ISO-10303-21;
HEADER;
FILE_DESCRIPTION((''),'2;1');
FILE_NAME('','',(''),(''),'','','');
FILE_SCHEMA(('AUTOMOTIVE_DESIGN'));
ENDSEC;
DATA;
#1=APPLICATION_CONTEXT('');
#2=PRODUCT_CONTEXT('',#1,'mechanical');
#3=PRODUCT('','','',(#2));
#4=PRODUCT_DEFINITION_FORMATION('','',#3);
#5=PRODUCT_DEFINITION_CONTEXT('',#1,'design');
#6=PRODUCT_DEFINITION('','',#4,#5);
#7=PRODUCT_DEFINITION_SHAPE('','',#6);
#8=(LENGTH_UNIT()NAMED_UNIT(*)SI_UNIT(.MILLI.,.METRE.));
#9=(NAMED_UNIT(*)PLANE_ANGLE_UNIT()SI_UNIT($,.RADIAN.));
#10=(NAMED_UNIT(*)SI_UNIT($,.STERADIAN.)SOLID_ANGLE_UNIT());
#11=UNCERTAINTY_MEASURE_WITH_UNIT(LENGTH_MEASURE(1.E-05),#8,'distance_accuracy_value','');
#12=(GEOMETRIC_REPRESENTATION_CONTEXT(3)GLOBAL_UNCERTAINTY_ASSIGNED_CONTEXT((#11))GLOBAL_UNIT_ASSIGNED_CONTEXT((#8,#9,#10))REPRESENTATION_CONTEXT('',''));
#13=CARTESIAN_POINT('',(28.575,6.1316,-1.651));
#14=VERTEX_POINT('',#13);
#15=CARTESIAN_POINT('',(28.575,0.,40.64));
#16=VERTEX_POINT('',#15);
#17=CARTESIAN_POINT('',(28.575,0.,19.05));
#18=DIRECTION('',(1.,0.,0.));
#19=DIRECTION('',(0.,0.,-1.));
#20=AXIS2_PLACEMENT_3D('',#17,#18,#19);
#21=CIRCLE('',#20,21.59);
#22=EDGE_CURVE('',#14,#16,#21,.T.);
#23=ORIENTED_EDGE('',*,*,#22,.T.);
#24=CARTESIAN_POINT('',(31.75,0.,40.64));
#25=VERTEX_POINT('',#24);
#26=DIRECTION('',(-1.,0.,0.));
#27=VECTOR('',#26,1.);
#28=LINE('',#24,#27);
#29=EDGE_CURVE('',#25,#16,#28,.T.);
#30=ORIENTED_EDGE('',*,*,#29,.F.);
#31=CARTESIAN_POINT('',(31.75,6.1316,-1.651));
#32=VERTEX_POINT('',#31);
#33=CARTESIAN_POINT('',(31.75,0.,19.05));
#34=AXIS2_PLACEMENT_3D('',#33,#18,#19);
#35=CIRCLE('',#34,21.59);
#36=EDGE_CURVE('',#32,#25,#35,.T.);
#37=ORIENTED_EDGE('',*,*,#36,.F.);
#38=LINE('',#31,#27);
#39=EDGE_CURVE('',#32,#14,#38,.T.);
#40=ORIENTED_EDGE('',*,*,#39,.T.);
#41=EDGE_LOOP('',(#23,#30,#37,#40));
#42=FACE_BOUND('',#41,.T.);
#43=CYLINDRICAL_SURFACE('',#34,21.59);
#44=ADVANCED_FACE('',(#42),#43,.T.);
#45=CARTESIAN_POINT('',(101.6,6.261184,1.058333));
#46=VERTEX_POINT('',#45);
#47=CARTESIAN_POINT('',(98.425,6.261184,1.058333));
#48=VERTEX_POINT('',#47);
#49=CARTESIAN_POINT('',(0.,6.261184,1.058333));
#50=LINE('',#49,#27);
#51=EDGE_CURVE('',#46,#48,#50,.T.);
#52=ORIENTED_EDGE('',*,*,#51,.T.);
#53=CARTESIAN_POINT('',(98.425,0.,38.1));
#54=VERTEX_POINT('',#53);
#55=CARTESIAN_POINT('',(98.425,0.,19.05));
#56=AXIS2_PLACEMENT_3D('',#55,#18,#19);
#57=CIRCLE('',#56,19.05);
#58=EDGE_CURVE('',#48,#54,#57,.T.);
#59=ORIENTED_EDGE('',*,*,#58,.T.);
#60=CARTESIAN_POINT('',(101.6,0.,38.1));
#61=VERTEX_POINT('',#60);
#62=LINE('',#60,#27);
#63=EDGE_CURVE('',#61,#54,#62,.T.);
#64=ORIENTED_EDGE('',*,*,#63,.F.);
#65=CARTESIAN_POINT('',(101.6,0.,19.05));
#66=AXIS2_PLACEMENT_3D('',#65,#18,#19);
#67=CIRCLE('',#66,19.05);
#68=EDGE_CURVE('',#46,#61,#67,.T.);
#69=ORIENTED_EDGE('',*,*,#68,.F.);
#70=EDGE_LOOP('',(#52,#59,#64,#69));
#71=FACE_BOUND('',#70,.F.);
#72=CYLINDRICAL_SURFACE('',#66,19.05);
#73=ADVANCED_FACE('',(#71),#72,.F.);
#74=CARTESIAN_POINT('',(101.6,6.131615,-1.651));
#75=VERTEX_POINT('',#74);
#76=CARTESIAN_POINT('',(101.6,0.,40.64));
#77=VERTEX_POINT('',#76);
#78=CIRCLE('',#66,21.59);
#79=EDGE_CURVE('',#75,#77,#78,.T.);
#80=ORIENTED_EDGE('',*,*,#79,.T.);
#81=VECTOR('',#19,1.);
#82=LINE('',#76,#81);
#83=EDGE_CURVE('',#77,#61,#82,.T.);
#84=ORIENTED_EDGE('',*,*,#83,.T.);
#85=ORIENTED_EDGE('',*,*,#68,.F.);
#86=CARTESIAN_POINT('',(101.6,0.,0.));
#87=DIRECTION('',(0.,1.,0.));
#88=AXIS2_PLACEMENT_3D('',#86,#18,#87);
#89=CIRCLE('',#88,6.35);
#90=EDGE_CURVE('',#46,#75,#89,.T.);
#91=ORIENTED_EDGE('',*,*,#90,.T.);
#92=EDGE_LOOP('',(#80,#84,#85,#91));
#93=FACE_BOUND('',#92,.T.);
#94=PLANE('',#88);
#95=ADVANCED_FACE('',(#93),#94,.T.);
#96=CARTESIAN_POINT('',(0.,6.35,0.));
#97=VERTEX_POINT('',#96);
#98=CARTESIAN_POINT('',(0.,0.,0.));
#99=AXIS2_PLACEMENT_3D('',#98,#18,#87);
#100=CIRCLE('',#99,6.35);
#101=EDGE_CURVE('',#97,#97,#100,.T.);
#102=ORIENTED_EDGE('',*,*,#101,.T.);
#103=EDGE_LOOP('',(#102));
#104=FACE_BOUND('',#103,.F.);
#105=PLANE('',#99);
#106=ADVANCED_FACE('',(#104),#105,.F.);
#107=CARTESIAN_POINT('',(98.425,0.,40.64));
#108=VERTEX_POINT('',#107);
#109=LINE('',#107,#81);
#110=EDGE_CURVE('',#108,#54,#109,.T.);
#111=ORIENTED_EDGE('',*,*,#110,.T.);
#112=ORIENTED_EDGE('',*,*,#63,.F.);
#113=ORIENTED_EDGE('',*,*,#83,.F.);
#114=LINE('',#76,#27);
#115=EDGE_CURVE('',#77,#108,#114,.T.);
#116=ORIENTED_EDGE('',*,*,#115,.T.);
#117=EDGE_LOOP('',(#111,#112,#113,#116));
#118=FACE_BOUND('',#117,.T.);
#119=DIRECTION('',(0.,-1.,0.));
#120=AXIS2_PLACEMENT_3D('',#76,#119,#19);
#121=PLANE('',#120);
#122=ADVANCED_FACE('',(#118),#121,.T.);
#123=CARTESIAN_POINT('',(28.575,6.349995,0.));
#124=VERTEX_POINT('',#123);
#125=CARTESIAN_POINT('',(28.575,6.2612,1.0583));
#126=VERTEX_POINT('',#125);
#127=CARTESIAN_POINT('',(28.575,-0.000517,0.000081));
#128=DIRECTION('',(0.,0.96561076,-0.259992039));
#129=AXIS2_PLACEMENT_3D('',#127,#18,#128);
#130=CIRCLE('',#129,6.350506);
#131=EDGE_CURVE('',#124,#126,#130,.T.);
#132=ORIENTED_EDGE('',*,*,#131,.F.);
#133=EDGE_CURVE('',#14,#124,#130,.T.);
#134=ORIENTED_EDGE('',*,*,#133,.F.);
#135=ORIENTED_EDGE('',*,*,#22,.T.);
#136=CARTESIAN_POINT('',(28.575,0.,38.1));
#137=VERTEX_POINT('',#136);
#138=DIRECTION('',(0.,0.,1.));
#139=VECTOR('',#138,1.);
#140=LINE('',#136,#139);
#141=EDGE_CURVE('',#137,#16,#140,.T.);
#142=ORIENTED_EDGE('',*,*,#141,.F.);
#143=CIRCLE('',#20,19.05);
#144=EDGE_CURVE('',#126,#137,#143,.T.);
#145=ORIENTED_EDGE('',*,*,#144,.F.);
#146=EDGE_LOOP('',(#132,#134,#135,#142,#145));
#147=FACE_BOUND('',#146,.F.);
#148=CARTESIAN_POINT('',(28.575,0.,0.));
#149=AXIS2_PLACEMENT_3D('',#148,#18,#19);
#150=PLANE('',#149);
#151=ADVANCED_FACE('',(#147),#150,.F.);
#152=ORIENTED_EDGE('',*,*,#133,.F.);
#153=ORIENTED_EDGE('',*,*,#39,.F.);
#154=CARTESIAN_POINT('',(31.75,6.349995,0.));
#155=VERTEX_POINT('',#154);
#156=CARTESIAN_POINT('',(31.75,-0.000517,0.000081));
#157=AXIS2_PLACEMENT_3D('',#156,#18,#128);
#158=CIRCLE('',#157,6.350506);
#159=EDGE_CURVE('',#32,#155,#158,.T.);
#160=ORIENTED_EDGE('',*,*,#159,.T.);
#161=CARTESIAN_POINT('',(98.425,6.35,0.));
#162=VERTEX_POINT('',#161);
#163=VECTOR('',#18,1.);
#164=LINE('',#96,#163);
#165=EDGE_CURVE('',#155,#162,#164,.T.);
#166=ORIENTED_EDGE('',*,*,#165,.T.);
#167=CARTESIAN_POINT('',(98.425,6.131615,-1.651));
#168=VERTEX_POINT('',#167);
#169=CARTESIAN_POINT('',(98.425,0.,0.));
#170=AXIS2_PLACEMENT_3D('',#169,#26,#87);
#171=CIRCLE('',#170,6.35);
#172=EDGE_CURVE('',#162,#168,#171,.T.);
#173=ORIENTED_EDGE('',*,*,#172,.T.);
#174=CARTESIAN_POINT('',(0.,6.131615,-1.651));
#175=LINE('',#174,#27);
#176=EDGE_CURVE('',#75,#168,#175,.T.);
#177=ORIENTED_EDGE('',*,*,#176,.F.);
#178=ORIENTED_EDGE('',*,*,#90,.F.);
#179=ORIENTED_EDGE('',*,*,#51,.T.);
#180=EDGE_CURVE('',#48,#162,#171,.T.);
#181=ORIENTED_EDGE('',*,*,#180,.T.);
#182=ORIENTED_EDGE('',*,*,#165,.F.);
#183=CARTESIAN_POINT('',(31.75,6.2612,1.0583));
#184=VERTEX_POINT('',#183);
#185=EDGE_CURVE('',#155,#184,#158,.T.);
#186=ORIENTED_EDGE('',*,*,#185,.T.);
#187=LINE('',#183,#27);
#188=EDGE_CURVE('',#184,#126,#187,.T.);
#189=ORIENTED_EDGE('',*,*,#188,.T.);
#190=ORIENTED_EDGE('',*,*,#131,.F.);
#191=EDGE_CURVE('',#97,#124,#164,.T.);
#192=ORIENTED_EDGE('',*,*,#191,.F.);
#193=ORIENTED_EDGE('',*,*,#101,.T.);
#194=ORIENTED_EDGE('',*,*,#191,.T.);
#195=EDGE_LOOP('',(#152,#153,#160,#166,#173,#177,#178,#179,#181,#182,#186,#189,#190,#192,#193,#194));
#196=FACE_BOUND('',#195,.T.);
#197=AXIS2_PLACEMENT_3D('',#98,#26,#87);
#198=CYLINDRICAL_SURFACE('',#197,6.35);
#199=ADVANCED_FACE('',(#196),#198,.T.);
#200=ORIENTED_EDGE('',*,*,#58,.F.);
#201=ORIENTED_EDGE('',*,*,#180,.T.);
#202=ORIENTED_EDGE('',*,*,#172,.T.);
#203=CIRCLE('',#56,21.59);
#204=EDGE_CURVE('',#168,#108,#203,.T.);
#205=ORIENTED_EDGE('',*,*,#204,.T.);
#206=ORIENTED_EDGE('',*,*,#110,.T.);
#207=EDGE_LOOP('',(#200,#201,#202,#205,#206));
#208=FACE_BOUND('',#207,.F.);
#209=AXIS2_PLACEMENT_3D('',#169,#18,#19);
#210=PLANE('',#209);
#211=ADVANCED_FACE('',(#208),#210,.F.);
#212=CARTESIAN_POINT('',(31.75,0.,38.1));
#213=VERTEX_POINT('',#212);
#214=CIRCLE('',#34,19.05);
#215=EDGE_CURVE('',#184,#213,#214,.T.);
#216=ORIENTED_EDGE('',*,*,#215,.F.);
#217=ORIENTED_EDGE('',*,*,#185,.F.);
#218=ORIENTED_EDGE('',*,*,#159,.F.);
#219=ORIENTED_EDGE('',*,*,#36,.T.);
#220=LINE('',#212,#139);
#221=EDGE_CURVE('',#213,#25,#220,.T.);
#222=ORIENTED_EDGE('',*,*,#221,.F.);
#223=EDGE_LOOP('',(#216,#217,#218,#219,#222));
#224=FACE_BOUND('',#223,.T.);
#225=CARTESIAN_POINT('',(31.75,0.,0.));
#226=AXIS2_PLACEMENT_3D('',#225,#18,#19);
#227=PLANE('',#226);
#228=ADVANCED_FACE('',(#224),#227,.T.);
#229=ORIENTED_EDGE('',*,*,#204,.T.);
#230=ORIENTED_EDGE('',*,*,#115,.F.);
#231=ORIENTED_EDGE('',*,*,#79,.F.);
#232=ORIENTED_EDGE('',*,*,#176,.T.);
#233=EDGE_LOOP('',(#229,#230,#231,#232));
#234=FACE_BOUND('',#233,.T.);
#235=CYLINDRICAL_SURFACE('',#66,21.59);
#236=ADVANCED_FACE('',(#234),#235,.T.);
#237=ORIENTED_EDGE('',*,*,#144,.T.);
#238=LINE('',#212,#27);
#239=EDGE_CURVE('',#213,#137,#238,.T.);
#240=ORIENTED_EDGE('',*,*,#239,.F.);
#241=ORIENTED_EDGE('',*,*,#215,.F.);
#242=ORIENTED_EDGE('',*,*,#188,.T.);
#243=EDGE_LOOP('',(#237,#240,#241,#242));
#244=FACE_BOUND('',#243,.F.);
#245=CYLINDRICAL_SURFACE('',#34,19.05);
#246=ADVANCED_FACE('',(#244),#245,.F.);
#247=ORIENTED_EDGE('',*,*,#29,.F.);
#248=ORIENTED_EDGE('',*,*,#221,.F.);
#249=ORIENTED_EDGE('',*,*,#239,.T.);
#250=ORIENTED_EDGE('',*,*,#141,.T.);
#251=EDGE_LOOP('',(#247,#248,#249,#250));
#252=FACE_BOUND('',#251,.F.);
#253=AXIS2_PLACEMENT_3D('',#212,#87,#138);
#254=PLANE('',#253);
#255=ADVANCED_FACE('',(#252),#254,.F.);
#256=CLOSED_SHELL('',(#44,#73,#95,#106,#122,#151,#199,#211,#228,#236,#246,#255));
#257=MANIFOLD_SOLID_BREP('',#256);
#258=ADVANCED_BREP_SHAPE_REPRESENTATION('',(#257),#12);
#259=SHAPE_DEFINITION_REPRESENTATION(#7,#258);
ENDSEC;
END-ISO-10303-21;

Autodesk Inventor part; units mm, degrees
ref_plane "YZ Plane" through (0, 0, 0) normal (1, 0, 0) x (0, 1, 0)
ref_plane "XZ Plane" through (0, 0, 0) normal (0, 1, 0) x (-1, 0, 0)
sketch "Sketch1" plane through (0, 0, 0) normal (1, 0, 0) x (0, 1, 0)
  circle A0 centre (0, 0) radius 6.35
  dimension "d0" = 12.7
extrude "Extrusion1" add sketch "Sketch1" along normal blind 101.6
sketch "Sketch2" plane through (101.6, 0, 0) normal (1, 0, 0) x (0, 0, -1)
  line L0 (0, 0) -> (2.54, 0)
  line L1 (-40.64, 0) -> (-38.1, 0)
  arc A0 (0, 0) -> (-38.1, 0) centre (-19.05, 0) ccw
  arc A1 (2.54, 0) -> (-40.64, 0) centre (-19.05, 0) ccw
  dimension "d3" = 2.54
  dimension "d4" = 2.54
  dimension "d5" = 38.1
  dimension "d6" = 19.05
extrude "Extrusion2" add sketch "Sketch2" against normal blind 3.175
ref_plane "Work Plane1" through (31.75, 0, 0) normal (1, 0, 0) x (0, 0, -1)
sketch "Sketch3" plane through (31.75, 0, 0) normal (1, 0, 0) x (0, 0, -1)
  line L0 (0, 0) -> (2.54, 0)
  line L1 (-38.1, 0) -> (-40.64, 0)
  arc A0 (0, 0) -> (-38.1, 0) centre (-19.05, 0) ccw
  arc A1 (-1.0583, 6.2612) -> (-38.1, 0) centre (-19.05, 0) ccw
  line L2 (-1.0583, 6.2612) -> (0, 0)
  arc A2 (2.54, 0) -> (-40.64, 0) centre (-19.05, 0) ccw
  line L3 (-38.1, 0) -> (-40.64, 0) construction
  line L4 (0, 0) -> (2.54, 0) construction
  arc A3 (1.651, 6.1316) -> (-40.64, 0) centre (-19.05, 0) ccw
  arc A4 (1.651, 6.1316) -> (-1.0583, 6.2612) centre (0, 0) ccw
  point P0 (0, 0)
  dimension "d10" = 2.54
  dimension "d11" = 2.54
  dimension "d12" = 38.1
  dimension "d13" = 19.05
  dimension "d14" = 180
  dimension "d15" = 6.35
extrude "Extrusion3" add sketch "Sketch3" against normal blind 3.175 contours A0 L1 A2 A4
equation "\"d6\" = 0.5 * d5"
equation "\"d13\" = 0.5 * d12"
properties part number "pincherRight"
